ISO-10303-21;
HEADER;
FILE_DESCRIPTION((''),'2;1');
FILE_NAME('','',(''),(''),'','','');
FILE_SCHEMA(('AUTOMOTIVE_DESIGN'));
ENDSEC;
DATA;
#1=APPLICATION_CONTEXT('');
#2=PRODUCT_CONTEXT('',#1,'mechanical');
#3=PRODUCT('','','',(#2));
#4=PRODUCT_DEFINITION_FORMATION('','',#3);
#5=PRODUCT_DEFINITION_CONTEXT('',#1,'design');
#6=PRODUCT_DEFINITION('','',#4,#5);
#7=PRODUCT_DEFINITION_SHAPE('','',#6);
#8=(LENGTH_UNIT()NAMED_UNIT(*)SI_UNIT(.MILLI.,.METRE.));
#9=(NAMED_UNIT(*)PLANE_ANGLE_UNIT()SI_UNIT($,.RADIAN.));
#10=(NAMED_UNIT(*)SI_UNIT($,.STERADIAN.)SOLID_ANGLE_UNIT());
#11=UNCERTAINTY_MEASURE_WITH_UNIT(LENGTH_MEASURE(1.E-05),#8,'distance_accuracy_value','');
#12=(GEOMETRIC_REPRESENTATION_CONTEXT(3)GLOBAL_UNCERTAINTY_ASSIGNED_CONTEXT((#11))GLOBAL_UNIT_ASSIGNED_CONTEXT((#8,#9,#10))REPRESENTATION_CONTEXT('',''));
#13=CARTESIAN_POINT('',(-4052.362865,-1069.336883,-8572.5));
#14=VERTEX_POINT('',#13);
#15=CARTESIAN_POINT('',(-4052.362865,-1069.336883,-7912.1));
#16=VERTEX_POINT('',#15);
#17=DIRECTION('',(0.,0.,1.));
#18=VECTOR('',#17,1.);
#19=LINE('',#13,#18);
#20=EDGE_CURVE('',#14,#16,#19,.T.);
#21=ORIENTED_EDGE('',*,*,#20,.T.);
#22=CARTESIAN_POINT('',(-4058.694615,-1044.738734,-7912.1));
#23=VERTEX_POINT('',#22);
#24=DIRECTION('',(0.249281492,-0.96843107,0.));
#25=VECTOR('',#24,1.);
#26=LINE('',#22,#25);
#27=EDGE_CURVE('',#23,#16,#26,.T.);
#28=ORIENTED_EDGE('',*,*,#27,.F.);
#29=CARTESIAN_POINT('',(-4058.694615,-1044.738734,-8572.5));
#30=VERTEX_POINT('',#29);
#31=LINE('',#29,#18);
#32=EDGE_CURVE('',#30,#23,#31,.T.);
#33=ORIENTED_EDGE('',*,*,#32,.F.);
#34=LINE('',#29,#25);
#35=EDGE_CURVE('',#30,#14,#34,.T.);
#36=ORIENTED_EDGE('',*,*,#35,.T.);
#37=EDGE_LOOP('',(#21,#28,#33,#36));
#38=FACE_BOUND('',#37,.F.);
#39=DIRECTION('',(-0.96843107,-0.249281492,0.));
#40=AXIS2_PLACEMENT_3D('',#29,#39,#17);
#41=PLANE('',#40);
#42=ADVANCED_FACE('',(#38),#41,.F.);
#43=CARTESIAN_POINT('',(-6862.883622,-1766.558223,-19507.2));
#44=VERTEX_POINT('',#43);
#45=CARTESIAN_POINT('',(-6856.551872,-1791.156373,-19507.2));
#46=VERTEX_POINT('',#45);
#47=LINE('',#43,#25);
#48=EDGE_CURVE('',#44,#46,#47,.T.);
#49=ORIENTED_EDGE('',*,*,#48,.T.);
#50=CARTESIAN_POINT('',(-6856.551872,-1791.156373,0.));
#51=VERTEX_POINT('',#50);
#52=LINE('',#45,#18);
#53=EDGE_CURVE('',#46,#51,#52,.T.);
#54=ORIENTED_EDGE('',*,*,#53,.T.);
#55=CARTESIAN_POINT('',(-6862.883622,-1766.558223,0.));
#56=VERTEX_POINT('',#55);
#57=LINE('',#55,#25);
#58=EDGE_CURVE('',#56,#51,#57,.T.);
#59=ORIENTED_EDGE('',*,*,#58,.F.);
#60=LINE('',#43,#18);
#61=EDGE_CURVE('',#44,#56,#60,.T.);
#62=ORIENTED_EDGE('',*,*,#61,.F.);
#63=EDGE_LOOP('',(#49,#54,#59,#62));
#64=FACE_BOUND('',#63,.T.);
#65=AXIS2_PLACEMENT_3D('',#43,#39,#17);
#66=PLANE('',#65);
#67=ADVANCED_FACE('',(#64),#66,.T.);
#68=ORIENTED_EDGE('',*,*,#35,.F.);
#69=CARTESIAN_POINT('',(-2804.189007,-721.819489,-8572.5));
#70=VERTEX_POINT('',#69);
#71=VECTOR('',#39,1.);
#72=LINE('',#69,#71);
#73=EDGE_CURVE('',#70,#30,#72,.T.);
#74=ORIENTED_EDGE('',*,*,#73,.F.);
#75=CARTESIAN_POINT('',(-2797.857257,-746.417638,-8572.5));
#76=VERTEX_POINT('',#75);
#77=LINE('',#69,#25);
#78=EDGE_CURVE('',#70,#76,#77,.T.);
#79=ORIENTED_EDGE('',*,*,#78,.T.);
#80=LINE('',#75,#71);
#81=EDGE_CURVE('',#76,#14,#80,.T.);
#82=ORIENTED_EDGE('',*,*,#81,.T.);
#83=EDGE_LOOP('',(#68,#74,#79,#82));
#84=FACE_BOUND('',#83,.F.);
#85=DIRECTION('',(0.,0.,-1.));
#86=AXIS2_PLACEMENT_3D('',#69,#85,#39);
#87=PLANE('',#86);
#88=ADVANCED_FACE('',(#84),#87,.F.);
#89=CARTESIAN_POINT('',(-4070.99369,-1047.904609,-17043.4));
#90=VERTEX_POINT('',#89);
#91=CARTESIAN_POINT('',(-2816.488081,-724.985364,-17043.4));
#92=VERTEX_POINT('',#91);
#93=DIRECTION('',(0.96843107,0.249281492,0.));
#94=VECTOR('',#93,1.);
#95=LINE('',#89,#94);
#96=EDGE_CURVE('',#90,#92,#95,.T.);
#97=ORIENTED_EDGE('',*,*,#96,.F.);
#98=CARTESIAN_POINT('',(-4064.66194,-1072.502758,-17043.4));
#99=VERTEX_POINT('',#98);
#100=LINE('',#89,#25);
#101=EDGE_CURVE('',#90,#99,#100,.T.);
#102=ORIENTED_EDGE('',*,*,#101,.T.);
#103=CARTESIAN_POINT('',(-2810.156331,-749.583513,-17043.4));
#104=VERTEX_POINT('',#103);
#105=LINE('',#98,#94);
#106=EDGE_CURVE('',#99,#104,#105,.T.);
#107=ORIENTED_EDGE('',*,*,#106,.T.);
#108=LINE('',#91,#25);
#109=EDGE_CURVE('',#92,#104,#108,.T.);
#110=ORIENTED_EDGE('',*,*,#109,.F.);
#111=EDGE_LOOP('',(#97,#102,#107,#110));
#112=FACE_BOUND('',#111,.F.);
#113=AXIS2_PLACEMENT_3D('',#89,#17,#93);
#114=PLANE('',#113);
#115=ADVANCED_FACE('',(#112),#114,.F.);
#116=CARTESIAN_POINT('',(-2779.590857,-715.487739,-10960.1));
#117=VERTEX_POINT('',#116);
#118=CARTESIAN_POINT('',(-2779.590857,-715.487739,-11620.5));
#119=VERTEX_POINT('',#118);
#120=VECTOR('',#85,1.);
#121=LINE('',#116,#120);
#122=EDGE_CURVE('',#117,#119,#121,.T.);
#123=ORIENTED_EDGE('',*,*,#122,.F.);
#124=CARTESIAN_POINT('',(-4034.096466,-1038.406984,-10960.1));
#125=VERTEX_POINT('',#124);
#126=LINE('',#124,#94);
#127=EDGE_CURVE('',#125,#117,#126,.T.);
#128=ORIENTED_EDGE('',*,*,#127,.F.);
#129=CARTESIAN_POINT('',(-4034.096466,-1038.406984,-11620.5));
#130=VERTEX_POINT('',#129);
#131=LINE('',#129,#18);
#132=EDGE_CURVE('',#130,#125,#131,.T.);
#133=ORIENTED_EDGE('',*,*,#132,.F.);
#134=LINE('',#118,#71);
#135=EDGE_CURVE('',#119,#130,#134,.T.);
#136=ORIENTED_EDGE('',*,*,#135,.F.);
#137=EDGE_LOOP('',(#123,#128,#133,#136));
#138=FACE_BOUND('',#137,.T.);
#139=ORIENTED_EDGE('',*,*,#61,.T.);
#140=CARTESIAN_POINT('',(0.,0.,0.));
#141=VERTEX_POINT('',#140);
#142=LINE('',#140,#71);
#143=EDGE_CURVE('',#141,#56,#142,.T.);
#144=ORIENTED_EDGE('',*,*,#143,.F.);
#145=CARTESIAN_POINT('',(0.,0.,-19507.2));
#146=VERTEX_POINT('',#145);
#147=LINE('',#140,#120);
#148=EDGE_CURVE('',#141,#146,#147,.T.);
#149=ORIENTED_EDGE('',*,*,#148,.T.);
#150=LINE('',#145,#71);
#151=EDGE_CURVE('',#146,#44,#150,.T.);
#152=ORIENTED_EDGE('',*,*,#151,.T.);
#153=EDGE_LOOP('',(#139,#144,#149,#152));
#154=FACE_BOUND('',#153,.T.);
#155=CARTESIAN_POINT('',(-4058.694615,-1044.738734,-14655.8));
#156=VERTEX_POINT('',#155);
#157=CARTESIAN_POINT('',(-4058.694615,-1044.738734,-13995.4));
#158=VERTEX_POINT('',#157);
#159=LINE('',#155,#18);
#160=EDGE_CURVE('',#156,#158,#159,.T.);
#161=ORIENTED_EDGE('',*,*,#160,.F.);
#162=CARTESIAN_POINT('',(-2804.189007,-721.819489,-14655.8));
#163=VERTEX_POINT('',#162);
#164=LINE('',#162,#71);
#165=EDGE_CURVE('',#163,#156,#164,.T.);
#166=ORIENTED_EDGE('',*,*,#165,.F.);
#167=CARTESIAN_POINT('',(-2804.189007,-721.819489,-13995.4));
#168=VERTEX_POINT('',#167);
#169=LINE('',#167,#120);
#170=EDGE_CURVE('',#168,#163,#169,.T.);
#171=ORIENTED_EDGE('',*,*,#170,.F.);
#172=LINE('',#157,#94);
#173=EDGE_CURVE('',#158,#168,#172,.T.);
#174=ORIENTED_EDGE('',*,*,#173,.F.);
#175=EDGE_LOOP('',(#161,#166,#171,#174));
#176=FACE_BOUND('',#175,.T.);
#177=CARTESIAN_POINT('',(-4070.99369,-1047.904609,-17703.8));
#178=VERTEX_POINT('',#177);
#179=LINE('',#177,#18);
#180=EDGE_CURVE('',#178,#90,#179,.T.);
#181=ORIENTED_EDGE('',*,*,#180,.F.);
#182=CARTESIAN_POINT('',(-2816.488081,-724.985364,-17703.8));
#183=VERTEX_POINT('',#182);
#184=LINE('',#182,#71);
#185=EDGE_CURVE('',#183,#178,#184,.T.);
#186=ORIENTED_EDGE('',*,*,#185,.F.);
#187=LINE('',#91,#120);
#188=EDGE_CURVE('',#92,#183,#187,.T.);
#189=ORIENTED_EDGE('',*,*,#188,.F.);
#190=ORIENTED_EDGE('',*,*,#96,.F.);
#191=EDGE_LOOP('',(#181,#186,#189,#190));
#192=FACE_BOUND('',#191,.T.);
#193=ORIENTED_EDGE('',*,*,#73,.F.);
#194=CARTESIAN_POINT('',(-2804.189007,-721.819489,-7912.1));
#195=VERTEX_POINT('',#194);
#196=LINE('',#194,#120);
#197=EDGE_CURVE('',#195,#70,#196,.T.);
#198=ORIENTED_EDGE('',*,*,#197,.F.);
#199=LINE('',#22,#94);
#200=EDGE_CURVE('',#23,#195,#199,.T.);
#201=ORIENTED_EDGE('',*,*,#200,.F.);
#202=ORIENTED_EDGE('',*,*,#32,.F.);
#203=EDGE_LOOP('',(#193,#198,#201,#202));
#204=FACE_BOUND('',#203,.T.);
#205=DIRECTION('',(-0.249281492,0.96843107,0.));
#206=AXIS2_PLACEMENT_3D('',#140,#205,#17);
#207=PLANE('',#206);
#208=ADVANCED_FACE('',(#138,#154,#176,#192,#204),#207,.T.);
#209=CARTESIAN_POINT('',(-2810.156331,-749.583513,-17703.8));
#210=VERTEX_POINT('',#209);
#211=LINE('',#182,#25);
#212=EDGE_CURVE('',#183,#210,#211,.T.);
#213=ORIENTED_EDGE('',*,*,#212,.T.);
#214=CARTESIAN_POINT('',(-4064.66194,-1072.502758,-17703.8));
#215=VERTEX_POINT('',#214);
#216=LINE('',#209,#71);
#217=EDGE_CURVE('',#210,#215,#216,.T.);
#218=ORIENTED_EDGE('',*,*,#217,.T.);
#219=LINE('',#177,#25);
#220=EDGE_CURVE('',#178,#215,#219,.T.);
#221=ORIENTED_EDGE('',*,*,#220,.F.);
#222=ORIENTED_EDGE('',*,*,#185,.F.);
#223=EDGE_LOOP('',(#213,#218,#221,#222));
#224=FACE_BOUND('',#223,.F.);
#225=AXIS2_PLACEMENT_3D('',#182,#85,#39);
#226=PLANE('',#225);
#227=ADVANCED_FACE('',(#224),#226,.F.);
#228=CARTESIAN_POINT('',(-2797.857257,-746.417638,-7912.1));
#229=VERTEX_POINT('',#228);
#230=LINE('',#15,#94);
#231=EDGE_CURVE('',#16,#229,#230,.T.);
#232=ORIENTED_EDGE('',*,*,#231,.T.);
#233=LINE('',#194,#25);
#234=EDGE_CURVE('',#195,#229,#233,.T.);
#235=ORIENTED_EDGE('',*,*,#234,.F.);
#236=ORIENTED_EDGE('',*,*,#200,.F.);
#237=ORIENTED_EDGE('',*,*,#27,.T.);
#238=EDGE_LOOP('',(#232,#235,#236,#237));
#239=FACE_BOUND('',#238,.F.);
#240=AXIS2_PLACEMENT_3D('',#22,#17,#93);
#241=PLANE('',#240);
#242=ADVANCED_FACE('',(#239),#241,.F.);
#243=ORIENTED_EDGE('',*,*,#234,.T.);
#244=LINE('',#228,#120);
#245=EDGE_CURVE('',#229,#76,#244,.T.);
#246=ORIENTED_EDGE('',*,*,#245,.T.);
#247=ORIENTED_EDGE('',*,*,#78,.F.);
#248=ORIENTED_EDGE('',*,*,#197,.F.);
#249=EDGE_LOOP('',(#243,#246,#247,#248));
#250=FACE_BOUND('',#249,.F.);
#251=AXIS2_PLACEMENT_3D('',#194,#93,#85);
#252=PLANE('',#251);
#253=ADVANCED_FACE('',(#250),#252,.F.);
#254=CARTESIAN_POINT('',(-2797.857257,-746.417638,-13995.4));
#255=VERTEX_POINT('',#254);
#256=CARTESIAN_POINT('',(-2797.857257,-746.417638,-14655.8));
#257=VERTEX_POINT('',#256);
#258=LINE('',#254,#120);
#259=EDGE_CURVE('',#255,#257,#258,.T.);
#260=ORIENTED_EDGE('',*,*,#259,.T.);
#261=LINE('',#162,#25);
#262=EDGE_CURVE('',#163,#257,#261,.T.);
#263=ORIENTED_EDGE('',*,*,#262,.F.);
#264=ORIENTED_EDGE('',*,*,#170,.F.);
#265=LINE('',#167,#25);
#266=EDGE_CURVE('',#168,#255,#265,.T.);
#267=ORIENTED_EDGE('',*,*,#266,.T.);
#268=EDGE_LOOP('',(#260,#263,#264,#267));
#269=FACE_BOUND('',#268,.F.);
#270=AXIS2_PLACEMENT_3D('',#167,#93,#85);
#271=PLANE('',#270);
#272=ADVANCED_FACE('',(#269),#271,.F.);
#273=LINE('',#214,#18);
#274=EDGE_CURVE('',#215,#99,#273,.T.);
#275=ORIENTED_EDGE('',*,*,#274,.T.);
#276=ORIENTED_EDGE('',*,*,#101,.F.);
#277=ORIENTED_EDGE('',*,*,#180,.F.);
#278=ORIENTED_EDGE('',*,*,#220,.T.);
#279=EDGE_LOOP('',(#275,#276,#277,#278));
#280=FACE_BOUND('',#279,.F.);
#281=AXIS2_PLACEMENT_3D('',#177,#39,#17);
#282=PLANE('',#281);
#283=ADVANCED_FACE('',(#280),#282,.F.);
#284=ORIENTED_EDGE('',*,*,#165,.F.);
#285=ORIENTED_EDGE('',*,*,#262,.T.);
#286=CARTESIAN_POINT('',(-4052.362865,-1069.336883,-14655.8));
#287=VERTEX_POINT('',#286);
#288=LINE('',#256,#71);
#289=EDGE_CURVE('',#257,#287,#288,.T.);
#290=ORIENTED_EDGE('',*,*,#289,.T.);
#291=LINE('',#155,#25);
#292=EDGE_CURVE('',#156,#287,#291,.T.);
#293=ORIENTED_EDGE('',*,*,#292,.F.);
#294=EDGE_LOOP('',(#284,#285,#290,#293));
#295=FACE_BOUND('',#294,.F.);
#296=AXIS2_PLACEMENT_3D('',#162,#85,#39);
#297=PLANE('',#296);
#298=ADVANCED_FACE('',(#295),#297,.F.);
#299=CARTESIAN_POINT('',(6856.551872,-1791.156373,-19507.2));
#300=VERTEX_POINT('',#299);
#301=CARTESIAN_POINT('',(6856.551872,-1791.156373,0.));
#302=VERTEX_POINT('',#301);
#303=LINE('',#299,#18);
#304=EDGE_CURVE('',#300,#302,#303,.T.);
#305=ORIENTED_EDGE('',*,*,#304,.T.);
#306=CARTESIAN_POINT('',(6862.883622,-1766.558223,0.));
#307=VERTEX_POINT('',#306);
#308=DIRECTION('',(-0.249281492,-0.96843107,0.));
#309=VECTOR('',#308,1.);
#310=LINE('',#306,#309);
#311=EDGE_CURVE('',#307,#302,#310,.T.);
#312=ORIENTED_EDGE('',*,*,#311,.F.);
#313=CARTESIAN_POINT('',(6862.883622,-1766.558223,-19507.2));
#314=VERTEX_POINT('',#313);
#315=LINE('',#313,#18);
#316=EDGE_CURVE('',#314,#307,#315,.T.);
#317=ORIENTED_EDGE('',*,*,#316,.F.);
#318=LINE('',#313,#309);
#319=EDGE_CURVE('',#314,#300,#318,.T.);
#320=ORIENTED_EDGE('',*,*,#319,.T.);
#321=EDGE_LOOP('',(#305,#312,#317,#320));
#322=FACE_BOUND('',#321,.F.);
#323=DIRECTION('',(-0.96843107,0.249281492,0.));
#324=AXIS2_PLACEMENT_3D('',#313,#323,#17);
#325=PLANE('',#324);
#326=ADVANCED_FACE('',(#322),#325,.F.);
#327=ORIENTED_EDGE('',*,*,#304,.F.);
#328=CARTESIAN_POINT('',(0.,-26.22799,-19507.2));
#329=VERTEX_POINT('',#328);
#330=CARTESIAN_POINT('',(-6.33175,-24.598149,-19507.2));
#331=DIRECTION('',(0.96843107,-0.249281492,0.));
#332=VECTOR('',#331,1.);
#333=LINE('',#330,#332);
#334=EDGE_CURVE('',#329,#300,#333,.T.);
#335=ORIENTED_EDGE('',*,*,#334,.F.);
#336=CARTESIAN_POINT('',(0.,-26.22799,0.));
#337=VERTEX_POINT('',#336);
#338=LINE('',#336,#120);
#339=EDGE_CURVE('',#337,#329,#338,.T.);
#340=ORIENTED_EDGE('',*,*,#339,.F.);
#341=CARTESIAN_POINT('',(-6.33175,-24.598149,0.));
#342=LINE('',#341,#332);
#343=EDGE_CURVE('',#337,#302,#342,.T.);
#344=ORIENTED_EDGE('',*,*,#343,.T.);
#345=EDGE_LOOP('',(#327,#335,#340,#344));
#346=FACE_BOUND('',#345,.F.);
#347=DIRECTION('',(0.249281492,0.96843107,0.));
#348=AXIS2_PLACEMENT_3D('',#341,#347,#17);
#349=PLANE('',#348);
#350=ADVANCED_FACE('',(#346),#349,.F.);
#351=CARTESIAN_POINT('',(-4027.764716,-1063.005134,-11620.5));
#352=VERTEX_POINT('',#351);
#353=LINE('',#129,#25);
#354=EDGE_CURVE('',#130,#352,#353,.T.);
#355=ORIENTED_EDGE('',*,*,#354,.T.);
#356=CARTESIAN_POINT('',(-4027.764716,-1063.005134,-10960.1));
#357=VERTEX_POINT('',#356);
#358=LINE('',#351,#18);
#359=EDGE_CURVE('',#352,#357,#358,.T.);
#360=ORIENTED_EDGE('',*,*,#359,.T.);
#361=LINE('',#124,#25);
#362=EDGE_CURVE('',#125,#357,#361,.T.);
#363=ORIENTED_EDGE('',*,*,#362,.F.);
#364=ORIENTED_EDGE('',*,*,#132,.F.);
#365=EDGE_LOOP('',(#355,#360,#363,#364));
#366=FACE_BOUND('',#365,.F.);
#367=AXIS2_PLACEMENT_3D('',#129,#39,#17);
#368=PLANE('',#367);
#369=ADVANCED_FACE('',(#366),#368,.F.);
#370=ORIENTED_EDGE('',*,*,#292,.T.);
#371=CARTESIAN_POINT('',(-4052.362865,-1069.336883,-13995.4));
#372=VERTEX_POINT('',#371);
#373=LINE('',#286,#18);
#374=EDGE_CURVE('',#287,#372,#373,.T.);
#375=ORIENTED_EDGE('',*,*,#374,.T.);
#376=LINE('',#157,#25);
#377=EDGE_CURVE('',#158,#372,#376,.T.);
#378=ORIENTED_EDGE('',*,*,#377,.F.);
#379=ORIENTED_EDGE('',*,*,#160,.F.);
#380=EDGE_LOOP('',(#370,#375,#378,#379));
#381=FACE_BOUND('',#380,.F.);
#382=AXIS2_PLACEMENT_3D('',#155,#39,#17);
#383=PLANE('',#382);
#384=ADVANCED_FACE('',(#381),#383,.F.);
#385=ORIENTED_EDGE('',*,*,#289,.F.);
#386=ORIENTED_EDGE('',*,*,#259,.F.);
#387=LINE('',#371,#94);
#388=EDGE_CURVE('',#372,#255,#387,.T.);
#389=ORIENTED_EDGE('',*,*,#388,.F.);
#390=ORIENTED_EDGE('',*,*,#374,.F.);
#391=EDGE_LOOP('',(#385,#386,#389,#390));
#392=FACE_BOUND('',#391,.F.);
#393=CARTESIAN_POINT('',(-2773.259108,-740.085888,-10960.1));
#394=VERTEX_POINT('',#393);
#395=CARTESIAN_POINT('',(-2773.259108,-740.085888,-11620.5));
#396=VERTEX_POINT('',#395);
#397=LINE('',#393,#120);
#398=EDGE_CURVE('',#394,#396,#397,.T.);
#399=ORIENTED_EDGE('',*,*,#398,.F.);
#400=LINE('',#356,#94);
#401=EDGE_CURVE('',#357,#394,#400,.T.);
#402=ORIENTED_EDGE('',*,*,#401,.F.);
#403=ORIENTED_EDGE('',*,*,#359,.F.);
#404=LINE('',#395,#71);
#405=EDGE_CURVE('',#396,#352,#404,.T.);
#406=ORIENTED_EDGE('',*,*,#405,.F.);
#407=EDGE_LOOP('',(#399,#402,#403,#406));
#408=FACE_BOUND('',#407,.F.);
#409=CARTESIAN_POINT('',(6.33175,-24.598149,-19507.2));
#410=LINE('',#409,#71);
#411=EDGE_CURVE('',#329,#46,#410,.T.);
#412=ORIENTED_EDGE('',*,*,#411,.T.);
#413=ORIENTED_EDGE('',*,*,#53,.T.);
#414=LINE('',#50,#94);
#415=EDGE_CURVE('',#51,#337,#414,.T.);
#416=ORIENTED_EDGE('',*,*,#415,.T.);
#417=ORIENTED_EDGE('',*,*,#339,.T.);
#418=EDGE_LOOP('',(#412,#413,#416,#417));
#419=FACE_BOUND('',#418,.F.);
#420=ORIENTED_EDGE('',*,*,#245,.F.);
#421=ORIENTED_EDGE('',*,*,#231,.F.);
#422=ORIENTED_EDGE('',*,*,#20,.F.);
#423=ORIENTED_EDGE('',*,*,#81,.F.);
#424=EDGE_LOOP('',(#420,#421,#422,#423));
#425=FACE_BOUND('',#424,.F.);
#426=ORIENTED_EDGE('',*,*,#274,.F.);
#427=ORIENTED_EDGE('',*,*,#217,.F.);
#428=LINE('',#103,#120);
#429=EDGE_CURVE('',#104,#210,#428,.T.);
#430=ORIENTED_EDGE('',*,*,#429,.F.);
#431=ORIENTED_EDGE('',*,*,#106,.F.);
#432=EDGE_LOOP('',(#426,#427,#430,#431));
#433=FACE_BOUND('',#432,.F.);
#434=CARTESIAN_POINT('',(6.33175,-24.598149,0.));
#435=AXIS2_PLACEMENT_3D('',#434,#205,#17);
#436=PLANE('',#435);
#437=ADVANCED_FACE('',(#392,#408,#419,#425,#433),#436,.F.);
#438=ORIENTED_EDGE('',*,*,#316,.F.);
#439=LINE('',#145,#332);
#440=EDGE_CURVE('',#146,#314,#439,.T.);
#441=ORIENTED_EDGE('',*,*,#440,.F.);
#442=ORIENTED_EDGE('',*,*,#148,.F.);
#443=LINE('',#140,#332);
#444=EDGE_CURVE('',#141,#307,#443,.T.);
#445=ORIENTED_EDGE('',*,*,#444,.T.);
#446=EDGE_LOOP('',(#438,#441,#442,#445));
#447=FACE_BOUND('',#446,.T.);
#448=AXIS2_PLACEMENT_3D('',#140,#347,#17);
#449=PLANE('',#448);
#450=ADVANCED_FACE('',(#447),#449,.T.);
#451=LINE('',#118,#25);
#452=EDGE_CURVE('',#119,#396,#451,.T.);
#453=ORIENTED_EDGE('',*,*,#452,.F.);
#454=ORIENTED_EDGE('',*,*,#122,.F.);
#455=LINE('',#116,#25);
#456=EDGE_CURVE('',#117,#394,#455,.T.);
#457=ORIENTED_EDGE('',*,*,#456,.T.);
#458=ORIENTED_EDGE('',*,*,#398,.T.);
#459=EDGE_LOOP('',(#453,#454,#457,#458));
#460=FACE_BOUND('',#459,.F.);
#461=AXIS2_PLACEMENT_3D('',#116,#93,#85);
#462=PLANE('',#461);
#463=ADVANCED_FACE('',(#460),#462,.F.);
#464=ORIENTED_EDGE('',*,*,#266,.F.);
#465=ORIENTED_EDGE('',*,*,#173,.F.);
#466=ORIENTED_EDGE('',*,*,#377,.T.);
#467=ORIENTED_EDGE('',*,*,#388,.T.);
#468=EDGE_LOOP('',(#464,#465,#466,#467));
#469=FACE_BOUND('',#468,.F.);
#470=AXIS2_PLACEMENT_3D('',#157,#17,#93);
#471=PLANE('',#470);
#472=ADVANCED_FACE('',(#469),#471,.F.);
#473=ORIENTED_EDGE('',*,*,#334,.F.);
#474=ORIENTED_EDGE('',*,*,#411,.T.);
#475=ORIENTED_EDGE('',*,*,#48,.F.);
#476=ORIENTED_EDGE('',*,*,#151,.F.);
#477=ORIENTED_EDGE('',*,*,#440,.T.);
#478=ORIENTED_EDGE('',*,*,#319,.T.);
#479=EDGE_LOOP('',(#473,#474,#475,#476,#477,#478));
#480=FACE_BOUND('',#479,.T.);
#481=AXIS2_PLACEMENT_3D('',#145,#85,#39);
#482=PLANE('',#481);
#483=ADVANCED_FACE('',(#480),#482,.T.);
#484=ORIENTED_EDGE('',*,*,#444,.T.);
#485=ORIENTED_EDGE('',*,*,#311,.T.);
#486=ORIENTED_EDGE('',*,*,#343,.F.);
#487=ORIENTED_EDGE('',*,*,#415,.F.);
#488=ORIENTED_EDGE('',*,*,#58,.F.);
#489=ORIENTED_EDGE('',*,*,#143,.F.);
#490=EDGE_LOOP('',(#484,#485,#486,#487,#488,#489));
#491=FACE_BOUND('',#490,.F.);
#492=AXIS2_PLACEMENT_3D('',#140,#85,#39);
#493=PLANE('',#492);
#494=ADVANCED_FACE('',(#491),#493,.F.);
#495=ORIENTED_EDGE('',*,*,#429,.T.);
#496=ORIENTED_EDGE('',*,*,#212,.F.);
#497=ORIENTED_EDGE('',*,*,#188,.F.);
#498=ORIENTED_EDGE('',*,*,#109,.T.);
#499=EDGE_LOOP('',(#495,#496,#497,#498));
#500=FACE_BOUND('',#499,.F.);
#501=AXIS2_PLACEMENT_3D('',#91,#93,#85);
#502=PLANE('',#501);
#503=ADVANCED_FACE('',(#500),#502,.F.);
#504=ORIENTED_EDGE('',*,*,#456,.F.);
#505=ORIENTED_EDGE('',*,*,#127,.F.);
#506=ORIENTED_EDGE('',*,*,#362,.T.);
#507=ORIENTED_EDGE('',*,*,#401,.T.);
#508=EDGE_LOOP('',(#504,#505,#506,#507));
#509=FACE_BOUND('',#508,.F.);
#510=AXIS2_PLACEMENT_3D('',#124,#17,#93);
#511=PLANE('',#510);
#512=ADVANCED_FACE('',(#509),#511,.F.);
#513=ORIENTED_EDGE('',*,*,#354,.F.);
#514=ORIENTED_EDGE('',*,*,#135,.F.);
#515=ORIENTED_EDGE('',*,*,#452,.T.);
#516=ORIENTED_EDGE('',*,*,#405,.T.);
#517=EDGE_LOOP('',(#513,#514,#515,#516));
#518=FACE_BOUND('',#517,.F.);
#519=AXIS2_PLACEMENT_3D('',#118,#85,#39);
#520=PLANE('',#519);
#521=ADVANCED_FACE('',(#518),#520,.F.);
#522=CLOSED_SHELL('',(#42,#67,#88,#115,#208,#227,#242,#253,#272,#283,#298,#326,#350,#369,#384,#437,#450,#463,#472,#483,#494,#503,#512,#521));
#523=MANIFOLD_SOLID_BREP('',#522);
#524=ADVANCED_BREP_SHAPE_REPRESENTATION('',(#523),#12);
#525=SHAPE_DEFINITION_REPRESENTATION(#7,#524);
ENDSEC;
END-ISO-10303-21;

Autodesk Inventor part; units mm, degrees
ref_plane "YZ Plane" through (0, 0, 0) normal (1, 0, 0) x (0, 1, 0)
ref_plane "XY Plane" through (0, 0, 0) normal (0, 0, 1) x (1, 0, 0)
ref_plane "southPlaneOfRoof" through (0, 0, 0) normal (-0.2492815, 0.9684311, 0) x (0, 0, 1)
ref_plane "norhtPlaneOfRoof" through (0, 0, 0) normal (0.2492815, 0.9684311, 0) x (0, 0, 1)
sketch "Sketch3" plane through (0, 0, 0) normal (-0.2492815, 0.9684311, 0) x (0, 0, 1)
  line L0 (0, 0) -> (-19507.2, 0)
  line L1 (-19507.2, 0) -> (-19507.2, -7086.6)
  line L2 (0, 0) -> (0, -7086.6)
  line L3 (0, -7086.6) -> (0, -25.4)
  line L4 (-19507.2, -7086.6) -> (0, -7086.6)
  line L5 (-17703.8, -4203.7) -> (-17043.4, -4203.7)
  line L6 (-17043.4, -4203.7) -> (-17043.4, -2908.3)
  line L7 (-17043.4, -2908.3) -> (-17703.8, -2908.3)
  line L8 (-17703.8, -2908.3) -> (-17703.8, -4203.7)
  line L9 (-14655.8, -4191) -> (-13995.4, -4191)
  line L10 (-13995.4, -4191) -> (-13995.4, -2895.6)
  line L11 (-13995.4, -2895.6) -> (-14655.8, -2895.6)
  line L12 (-14655.8, -2895.6) -> (-14655.8, -4191)
  line L13 (-11620.5, -4165.6) -> (-10960.1, -4165.6)
  line L14 (-10960.1, -4165.6) -> (-10960.1, -2870.2)
  line L15 (-10960.1, -2870.2) -> (-11620.5, -2870.2)
  line L16 (-11620.5, -2870.2) -> (-11620.5, -4165.6)
  line L17 (-8572.5, -4191) -> (-7912.1, -4191)
  line L18 (-7912.1, -4191) -> (-7912.1, -2895.6)
  line L19 (-7912.1, -2895.6) -> (-8572.5, -2895.6)
  line L20 (-8572.5, -2895.6) -> (-8572.5, -4191)
  dimension "d9" = 19507.2
  dimension "d10" = 7086.6
  dimension "d11" = 7061.2
  dimension "d15" = 660.4
  dimension "d16" = 1295.4
  dimension "d17" = 1803.4
  dimension "d18" = 2387.6
  dimension "d19" = 2374.9
  dimension "d20" = 2387.6
  dimension "d21" = 2908.3
  dimension "d22" = 2895.6
  dimension "d23" = 2870.2
  dimension "d24" = 2895.6
sketch "Sketch4" plane through (0, 0, 0) normal (0.2492815, 0.9684311, 0) x (0, 0, 1)
  line L0 (0, 0) -> (0, 7086.6)
  line L1 (0, 0) -> (-19507.2, 0)
  line L2 (-19507.2, 0) -> (-19507.2, 7086.6)
  line L3 (-19507.2, 7086.6) -> (0, 7086.6)
  dimension "d12" = 7086.6
  dimension "d13" = 19507.2
  dimension "d14" = 7086.6
extrude "Extrusion2" add sketch "Sketch3" against normal blind 25.4
extrude "Extrusion3" add sketch "Sketch4" against normal blind 25.4
equation "\"pitch_4_12\" = 14.435deg"
equation "\"d7\" = pitch_4_12"
equation "\"d8\" = -pitch_4_12"
properties part number "garageRoofV2"
